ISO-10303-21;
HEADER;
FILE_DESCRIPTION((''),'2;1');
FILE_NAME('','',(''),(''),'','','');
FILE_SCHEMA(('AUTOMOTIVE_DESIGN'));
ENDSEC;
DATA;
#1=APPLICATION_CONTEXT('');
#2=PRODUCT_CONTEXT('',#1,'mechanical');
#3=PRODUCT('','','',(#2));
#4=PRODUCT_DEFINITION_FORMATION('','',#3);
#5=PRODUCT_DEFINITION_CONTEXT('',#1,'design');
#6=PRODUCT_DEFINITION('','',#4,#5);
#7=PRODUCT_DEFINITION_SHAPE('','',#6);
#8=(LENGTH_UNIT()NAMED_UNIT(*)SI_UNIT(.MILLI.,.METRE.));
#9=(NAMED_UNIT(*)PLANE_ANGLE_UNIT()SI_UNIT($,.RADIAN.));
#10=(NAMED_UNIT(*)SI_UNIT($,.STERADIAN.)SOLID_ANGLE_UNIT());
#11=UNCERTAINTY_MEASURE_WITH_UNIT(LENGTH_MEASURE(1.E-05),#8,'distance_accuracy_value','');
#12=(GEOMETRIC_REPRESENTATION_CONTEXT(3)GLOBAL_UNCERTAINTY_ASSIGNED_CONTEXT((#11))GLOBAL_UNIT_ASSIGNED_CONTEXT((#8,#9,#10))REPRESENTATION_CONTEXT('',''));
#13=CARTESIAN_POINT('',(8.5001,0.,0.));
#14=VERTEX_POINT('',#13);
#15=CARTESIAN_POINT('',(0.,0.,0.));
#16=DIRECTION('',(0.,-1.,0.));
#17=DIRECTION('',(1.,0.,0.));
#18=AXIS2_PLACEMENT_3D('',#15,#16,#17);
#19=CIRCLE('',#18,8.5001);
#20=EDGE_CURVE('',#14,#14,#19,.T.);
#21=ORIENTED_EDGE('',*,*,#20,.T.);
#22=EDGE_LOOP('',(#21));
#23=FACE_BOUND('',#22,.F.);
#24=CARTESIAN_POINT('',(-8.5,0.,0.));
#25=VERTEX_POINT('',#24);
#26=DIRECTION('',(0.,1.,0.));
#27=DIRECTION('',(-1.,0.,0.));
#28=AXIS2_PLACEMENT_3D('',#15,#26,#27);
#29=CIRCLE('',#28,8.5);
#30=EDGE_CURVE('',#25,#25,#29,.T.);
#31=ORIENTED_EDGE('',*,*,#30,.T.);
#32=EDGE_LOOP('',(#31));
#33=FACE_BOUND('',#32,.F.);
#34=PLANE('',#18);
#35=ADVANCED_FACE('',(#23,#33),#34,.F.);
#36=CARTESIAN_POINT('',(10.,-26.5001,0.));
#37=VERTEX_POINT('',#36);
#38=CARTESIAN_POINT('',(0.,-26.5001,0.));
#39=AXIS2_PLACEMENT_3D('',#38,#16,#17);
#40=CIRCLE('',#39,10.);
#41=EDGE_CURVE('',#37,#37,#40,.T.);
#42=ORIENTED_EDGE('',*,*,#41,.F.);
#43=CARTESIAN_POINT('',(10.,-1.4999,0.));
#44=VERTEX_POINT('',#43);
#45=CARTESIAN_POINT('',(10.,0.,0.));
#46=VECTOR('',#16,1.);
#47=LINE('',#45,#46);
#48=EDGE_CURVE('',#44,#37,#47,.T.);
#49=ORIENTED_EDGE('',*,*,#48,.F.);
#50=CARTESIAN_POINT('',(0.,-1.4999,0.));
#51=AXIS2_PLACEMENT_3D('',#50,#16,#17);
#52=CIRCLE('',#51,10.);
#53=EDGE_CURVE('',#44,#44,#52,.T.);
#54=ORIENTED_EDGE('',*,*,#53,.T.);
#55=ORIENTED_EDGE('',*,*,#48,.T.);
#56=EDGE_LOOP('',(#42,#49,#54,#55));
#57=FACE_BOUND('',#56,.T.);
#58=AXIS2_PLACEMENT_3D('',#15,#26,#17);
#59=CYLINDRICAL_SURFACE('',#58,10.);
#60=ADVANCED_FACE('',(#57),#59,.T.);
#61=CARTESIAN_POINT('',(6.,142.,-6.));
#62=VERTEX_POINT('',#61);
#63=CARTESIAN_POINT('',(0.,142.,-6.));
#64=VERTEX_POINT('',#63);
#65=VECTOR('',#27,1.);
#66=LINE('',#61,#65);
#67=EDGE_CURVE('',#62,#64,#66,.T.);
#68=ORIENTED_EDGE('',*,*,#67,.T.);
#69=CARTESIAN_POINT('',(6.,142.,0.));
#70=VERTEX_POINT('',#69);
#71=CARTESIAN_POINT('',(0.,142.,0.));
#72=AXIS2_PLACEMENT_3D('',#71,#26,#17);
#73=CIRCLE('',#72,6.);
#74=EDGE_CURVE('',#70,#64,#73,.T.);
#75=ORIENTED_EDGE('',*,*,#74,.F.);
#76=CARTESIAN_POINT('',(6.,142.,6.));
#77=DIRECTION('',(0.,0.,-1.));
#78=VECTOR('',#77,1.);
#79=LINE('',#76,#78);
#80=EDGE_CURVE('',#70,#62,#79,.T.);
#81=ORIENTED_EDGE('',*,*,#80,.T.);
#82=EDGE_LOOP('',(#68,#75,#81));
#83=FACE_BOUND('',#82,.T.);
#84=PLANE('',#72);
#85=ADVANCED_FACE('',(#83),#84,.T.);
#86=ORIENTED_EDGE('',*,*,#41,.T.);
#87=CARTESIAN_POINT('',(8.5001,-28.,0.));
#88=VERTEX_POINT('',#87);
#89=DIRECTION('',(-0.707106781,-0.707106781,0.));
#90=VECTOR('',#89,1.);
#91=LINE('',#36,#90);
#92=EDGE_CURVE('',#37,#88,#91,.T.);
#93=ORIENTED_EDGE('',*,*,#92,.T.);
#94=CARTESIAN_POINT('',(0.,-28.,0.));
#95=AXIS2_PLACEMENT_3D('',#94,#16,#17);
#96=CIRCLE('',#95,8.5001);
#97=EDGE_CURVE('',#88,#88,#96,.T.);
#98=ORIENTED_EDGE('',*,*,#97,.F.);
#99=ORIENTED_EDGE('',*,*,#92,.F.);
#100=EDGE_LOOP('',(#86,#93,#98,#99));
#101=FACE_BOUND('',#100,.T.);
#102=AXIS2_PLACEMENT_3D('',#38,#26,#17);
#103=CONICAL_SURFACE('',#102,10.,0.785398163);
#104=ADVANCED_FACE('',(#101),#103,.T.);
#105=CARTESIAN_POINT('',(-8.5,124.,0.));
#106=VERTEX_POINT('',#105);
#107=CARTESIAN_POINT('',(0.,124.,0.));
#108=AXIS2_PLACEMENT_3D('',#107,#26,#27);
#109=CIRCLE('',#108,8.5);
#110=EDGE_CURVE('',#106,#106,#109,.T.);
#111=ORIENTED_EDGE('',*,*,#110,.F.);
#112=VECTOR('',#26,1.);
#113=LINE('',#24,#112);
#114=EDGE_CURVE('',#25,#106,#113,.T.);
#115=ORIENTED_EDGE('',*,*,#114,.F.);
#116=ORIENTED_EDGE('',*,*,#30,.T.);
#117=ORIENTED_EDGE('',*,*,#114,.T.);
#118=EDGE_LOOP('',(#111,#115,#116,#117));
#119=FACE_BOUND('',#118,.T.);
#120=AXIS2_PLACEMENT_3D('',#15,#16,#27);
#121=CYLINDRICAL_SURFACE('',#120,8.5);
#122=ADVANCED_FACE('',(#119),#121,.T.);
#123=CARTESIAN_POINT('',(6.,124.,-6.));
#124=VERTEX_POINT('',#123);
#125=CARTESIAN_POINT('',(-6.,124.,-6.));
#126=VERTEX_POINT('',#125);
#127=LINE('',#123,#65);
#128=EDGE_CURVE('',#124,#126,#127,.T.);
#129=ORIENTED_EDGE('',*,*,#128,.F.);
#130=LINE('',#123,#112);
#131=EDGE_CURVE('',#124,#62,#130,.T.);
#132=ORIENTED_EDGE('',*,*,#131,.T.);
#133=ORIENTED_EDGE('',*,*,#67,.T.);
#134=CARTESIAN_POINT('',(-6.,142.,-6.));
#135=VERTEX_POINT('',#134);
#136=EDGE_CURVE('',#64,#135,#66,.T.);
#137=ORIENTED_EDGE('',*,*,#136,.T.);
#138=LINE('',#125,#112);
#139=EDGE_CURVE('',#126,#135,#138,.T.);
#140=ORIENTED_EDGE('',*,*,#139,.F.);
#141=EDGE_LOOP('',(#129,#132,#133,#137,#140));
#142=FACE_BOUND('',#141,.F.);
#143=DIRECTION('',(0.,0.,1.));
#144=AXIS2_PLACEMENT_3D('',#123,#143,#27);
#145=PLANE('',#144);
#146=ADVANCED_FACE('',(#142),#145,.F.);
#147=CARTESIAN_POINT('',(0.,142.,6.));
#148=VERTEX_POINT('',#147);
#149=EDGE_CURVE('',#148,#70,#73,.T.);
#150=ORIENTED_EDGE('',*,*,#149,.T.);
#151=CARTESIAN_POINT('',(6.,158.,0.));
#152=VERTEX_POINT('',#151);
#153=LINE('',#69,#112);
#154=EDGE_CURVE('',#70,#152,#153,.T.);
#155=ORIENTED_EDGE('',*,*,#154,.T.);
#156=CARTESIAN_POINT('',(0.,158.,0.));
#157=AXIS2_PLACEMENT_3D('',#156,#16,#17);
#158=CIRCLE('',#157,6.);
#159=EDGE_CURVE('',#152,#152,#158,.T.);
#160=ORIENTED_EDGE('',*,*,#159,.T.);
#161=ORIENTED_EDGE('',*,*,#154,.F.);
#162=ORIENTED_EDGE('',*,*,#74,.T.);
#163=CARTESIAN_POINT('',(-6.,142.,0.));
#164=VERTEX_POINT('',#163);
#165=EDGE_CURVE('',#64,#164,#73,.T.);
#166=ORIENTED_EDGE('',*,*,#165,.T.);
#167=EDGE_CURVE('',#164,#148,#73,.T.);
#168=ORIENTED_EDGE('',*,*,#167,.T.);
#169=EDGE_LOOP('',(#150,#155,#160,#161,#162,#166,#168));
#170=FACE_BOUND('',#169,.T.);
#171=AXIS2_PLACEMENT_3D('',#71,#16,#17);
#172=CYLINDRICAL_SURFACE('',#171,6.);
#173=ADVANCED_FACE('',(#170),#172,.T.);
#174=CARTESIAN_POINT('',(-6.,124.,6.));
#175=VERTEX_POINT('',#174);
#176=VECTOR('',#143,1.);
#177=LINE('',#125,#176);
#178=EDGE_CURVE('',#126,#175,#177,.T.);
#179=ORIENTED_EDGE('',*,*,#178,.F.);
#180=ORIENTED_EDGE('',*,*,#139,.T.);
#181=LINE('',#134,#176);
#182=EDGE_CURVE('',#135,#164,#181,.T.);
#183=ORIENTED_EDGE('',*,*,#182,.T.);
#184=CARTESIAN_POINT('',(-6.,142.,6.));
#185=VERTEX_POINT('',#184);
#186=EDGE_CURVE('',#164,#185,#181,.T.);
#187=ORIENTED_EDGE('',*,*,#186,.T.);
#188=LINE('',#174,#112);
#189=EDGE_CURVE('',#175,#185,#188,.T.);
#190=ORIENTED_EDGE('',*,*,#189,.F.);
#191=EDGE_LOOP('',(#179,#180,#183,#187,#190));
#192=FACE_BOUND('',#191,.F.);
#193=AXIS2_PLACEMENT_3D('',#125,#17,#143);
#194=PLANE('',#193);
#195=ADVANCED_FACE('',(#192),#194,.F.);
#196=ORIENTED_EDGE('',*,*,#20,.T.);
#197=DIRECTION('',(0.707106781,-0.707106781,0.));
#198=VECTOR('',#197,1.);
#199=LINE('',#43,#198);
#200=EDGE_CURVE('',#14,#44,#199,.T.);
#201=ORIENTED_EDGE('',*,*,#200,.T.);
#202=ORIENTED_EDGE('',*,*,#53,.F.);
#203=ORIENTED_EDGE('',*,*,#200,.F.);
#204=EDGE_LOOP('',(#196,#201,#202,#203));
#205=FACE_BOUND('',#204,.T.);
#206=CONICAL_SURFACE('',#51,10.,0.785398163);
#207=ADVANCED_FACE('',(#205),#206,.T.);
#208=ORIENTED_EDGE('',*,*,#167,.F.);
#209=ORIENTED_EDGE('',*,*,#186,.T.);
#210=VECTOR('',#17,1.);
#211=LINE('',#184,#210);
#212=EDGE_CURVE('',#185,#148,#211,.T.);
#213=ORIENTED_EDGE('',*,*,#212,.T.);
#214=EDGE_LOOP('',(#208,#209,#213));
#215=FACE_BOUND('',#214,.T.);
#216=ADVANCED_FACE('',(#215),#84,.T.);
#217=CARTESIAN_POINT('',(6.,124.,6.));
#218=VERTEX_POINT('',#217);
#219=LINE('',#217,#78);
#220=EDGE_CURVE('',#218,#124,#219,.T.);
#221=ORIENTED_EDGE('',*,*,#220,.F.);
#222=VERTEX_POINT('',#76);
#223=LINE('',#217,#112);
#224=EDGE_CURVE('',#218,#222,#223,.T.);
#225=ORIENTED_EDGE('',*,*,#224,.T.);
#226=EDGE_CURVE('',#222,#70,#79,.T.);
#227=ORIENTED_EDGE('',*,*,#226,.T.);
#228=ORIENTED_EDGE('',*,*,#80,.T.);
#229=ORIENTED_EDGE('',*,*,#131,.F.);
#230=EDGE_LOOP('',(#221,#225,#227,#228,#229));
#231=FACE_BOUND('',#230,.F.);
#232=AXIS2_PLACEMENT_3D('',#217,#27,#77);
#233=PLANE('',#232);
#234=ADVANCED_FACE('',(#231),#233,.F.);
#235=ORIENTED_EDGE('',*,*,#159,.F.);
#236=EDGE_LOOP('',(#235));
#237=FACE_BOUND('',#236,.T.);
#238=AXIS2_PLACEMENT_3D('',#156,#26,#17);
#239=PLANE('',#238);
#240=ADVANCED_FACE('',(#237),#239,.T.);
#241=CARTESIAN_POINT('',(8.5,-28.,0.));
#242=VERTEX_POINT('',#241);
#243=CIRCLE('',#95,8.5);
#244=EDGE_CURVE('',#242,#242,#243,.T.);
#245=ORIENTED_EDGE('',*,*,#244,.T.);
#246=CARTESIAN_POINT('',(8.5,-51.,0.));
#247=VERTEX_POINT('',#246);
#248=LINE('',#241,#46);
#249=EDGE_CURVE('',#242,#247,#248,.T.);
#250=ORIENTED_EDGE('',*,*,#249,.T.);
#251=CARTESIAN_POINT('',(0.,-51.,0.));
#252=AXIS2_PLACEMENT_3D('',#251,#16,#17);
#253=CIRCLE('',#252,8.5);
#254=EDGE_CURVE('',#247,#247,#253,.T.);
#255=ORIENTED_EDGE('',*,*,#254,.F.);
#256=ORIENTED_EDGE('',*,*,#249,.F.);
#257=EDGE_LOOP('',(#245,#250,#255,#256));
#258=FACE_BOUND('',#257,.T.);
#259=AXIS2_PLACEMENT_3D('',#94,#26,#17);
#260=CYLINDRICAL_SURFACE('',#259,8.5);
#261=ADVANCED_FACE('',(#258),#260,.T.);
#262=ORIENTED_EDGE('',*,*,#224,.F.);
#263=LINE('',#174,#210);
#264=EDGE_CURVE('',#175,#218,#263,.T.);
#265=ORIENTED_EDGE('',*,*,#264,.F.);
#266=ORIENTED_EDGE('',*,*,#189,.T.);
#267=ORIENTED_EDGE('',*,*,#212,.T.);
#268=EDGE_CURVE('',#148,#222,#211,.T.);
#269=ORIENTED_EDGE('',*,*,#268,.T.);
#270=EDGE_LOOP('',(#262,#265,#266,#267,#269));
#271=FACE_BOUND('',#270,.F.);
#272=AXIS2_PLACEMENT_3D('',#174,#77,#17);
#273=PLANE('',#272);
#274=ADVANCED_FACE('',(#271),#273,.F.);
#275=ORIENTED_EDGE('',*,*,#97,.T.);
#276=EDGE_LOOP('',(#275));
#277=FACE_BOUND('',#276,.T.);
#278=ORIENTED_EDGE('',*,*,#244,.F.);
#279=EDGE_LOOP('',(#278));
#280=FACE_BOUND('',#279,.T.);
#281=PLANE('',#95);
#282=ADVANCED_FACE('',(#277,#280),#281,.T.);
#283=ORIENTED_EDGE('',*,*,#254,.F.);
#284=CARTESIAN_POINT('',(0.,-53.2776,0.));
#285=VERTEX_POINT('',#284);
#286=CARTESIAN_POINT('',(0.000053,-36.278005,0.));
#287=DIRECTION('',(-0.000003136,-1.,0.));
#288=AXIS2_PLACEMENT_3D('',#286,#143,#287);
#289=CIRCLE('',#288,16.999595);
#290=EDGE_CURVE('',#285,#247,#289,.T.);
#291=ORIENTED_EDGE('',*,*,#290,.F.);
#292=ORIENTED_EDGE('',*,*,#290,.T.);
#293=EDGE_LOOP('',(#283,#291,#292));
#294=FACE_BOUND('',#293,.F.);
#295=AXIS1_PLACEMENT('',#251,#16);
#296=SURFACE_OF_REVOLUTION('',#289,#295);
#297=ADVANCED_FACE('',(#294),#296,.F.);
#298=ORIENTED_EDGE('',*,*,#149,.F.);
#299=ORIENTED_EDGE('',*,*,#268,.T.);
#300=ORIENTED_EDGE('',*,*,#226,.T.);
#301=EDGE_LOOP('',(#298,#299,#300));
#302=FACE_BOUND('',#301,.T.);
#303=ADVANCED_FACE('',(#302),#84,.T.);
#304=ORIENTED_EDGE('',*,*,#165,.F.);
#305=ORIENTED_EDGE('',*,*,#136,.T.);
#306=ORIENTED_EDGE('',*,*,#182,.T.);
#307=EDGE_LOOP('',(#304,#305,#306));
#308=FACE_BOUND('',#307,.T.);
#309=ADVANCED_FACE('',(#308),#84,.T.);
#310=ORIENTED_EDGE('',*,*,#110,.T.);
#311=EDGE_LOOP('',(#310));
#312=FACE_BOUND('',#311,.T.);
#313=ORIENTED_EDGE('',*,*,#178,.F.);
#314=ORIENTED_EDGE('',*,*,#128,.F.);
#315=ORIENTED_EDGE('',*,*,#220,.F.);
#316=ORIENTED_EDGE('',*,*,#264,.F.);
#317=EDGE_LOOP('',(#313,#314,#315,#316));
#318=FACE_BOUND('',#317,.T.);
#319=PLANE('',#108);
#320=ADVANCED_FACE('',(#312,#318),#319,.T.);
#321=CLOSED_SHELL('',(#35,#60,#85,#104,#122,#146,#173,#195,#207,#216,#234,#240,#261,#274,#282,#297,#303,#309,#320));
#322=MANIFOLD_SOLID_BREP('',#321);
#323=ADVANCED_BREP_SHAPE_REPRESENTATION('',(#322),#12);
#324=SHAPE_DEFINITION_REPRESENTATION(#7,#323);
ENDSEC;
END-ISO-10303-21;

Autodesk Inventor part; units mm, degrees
ref_plane "YZ Plane" through (0, 0, 0) normal (1, 0, 0) x (0, 1, 0)
ref_plane "XZ Plane" through (0, 0, 0) normal (0, 1, 0) x (-1, 0, 0)
ref_plane "XY Plane" through (0, 0, 0) normal (0, 0, 1) x (1, 0, 0)
sketch "Sketch1" plane through (0, 0, 0) normal (0, 1, 0) x (-1, 0, 0)
  circle A0 centre (0, 0) radius 8.5
  dimension "d0" = 17
extrude "Extrusion1" add sketch "Sketch1" along normal blind 124
sketch "Sketch2" plane through (0, 124, 0) normal (0, 1, 0) x (1, 0, 0)
  line L0 (6, 6) -> (-6, 6)
  line L1 (-6, 6) -> (-6, -6)
  line L2 (-6, -6) -> (6, -6)
  line L3 (6, -6) -> (6, 6)
  line L4 (6, 6) -> (-6, -6) construction
  line L5 (-6, 6) -> (6, -6) construction
  point P0 (0, 0)
  dimension "d3" = 12
  dimension "d4" = 12
extrude "Extrusion2" add sketch "Sketch2" along normal blind 18
sketch "Sketch3" plane through (0, 142, 0) normal (0, 1, 0) x (1, 0, 0)
  circle A0 centre (0, 0) radius 6
  line L0 (-6, 6) -> (-6, -6) projected
  line L1 (6, 6) -> (-6, 6) projected
  line L2 (6, -6) -> (6, 6) projected
  line L3 (-6, -6) -> (6, -6) projected
extrude "Extrusion3" add sketch "Sketch3" along normal blind 16 contours A0
sketch "Sketch4" plane through (0, 0, 0) normal (0, -1, 0) x (1, 0, 0)
  circle A0 centre (0, 0) radius 8.5 projected
  circle A1 centre (0, 0) radius 10
  dimension "d9" = 20
extrude "Extrusion4" add sketch "Sketch4" along normal blind 28 contours A0 | A1
sketch "Sketch5" plane through (0, -28, 0) normal (0, -1, 0) x (1, 0, 0)
  circle A0 centre (0, 0) radius 8.5
  dimension "d12" = 17
extrude "Extrusion5" add sketch "Sketch5" along normal blind 23
chamfer "Chamfer1" distance 1.5 angle 45 2 edges at (-10, -28, 0) (-10, 0, 0)
sketch "Sketch6" plane through (0, 0, 0) normal (0, 0, 1) x (1, 0, 0)
  line L0 (-8.5, -51) -> (8.5, -51) projected
  arc A0 (0, -53.2776) -> (8.5, -51) centre (0, -36.2776) ccw
  line L1 (0, -51) -> (0, -53.2776)
  point P0 (0, 0)
revolve "Revolution1" add sketch "Sketch6" angle 360 about axis through (0, -51, 0) along (0, -1, 0)
thread "Thread1" size "M12x1" class "6g" standard "ANSI Metric M Profile" full length
thread "Thread2" size "M20x2.5" class "6g" standard "ANSI Metric M Profile" full length
properties part number "00.32.010 \"Spindle\"" material "Steel"
